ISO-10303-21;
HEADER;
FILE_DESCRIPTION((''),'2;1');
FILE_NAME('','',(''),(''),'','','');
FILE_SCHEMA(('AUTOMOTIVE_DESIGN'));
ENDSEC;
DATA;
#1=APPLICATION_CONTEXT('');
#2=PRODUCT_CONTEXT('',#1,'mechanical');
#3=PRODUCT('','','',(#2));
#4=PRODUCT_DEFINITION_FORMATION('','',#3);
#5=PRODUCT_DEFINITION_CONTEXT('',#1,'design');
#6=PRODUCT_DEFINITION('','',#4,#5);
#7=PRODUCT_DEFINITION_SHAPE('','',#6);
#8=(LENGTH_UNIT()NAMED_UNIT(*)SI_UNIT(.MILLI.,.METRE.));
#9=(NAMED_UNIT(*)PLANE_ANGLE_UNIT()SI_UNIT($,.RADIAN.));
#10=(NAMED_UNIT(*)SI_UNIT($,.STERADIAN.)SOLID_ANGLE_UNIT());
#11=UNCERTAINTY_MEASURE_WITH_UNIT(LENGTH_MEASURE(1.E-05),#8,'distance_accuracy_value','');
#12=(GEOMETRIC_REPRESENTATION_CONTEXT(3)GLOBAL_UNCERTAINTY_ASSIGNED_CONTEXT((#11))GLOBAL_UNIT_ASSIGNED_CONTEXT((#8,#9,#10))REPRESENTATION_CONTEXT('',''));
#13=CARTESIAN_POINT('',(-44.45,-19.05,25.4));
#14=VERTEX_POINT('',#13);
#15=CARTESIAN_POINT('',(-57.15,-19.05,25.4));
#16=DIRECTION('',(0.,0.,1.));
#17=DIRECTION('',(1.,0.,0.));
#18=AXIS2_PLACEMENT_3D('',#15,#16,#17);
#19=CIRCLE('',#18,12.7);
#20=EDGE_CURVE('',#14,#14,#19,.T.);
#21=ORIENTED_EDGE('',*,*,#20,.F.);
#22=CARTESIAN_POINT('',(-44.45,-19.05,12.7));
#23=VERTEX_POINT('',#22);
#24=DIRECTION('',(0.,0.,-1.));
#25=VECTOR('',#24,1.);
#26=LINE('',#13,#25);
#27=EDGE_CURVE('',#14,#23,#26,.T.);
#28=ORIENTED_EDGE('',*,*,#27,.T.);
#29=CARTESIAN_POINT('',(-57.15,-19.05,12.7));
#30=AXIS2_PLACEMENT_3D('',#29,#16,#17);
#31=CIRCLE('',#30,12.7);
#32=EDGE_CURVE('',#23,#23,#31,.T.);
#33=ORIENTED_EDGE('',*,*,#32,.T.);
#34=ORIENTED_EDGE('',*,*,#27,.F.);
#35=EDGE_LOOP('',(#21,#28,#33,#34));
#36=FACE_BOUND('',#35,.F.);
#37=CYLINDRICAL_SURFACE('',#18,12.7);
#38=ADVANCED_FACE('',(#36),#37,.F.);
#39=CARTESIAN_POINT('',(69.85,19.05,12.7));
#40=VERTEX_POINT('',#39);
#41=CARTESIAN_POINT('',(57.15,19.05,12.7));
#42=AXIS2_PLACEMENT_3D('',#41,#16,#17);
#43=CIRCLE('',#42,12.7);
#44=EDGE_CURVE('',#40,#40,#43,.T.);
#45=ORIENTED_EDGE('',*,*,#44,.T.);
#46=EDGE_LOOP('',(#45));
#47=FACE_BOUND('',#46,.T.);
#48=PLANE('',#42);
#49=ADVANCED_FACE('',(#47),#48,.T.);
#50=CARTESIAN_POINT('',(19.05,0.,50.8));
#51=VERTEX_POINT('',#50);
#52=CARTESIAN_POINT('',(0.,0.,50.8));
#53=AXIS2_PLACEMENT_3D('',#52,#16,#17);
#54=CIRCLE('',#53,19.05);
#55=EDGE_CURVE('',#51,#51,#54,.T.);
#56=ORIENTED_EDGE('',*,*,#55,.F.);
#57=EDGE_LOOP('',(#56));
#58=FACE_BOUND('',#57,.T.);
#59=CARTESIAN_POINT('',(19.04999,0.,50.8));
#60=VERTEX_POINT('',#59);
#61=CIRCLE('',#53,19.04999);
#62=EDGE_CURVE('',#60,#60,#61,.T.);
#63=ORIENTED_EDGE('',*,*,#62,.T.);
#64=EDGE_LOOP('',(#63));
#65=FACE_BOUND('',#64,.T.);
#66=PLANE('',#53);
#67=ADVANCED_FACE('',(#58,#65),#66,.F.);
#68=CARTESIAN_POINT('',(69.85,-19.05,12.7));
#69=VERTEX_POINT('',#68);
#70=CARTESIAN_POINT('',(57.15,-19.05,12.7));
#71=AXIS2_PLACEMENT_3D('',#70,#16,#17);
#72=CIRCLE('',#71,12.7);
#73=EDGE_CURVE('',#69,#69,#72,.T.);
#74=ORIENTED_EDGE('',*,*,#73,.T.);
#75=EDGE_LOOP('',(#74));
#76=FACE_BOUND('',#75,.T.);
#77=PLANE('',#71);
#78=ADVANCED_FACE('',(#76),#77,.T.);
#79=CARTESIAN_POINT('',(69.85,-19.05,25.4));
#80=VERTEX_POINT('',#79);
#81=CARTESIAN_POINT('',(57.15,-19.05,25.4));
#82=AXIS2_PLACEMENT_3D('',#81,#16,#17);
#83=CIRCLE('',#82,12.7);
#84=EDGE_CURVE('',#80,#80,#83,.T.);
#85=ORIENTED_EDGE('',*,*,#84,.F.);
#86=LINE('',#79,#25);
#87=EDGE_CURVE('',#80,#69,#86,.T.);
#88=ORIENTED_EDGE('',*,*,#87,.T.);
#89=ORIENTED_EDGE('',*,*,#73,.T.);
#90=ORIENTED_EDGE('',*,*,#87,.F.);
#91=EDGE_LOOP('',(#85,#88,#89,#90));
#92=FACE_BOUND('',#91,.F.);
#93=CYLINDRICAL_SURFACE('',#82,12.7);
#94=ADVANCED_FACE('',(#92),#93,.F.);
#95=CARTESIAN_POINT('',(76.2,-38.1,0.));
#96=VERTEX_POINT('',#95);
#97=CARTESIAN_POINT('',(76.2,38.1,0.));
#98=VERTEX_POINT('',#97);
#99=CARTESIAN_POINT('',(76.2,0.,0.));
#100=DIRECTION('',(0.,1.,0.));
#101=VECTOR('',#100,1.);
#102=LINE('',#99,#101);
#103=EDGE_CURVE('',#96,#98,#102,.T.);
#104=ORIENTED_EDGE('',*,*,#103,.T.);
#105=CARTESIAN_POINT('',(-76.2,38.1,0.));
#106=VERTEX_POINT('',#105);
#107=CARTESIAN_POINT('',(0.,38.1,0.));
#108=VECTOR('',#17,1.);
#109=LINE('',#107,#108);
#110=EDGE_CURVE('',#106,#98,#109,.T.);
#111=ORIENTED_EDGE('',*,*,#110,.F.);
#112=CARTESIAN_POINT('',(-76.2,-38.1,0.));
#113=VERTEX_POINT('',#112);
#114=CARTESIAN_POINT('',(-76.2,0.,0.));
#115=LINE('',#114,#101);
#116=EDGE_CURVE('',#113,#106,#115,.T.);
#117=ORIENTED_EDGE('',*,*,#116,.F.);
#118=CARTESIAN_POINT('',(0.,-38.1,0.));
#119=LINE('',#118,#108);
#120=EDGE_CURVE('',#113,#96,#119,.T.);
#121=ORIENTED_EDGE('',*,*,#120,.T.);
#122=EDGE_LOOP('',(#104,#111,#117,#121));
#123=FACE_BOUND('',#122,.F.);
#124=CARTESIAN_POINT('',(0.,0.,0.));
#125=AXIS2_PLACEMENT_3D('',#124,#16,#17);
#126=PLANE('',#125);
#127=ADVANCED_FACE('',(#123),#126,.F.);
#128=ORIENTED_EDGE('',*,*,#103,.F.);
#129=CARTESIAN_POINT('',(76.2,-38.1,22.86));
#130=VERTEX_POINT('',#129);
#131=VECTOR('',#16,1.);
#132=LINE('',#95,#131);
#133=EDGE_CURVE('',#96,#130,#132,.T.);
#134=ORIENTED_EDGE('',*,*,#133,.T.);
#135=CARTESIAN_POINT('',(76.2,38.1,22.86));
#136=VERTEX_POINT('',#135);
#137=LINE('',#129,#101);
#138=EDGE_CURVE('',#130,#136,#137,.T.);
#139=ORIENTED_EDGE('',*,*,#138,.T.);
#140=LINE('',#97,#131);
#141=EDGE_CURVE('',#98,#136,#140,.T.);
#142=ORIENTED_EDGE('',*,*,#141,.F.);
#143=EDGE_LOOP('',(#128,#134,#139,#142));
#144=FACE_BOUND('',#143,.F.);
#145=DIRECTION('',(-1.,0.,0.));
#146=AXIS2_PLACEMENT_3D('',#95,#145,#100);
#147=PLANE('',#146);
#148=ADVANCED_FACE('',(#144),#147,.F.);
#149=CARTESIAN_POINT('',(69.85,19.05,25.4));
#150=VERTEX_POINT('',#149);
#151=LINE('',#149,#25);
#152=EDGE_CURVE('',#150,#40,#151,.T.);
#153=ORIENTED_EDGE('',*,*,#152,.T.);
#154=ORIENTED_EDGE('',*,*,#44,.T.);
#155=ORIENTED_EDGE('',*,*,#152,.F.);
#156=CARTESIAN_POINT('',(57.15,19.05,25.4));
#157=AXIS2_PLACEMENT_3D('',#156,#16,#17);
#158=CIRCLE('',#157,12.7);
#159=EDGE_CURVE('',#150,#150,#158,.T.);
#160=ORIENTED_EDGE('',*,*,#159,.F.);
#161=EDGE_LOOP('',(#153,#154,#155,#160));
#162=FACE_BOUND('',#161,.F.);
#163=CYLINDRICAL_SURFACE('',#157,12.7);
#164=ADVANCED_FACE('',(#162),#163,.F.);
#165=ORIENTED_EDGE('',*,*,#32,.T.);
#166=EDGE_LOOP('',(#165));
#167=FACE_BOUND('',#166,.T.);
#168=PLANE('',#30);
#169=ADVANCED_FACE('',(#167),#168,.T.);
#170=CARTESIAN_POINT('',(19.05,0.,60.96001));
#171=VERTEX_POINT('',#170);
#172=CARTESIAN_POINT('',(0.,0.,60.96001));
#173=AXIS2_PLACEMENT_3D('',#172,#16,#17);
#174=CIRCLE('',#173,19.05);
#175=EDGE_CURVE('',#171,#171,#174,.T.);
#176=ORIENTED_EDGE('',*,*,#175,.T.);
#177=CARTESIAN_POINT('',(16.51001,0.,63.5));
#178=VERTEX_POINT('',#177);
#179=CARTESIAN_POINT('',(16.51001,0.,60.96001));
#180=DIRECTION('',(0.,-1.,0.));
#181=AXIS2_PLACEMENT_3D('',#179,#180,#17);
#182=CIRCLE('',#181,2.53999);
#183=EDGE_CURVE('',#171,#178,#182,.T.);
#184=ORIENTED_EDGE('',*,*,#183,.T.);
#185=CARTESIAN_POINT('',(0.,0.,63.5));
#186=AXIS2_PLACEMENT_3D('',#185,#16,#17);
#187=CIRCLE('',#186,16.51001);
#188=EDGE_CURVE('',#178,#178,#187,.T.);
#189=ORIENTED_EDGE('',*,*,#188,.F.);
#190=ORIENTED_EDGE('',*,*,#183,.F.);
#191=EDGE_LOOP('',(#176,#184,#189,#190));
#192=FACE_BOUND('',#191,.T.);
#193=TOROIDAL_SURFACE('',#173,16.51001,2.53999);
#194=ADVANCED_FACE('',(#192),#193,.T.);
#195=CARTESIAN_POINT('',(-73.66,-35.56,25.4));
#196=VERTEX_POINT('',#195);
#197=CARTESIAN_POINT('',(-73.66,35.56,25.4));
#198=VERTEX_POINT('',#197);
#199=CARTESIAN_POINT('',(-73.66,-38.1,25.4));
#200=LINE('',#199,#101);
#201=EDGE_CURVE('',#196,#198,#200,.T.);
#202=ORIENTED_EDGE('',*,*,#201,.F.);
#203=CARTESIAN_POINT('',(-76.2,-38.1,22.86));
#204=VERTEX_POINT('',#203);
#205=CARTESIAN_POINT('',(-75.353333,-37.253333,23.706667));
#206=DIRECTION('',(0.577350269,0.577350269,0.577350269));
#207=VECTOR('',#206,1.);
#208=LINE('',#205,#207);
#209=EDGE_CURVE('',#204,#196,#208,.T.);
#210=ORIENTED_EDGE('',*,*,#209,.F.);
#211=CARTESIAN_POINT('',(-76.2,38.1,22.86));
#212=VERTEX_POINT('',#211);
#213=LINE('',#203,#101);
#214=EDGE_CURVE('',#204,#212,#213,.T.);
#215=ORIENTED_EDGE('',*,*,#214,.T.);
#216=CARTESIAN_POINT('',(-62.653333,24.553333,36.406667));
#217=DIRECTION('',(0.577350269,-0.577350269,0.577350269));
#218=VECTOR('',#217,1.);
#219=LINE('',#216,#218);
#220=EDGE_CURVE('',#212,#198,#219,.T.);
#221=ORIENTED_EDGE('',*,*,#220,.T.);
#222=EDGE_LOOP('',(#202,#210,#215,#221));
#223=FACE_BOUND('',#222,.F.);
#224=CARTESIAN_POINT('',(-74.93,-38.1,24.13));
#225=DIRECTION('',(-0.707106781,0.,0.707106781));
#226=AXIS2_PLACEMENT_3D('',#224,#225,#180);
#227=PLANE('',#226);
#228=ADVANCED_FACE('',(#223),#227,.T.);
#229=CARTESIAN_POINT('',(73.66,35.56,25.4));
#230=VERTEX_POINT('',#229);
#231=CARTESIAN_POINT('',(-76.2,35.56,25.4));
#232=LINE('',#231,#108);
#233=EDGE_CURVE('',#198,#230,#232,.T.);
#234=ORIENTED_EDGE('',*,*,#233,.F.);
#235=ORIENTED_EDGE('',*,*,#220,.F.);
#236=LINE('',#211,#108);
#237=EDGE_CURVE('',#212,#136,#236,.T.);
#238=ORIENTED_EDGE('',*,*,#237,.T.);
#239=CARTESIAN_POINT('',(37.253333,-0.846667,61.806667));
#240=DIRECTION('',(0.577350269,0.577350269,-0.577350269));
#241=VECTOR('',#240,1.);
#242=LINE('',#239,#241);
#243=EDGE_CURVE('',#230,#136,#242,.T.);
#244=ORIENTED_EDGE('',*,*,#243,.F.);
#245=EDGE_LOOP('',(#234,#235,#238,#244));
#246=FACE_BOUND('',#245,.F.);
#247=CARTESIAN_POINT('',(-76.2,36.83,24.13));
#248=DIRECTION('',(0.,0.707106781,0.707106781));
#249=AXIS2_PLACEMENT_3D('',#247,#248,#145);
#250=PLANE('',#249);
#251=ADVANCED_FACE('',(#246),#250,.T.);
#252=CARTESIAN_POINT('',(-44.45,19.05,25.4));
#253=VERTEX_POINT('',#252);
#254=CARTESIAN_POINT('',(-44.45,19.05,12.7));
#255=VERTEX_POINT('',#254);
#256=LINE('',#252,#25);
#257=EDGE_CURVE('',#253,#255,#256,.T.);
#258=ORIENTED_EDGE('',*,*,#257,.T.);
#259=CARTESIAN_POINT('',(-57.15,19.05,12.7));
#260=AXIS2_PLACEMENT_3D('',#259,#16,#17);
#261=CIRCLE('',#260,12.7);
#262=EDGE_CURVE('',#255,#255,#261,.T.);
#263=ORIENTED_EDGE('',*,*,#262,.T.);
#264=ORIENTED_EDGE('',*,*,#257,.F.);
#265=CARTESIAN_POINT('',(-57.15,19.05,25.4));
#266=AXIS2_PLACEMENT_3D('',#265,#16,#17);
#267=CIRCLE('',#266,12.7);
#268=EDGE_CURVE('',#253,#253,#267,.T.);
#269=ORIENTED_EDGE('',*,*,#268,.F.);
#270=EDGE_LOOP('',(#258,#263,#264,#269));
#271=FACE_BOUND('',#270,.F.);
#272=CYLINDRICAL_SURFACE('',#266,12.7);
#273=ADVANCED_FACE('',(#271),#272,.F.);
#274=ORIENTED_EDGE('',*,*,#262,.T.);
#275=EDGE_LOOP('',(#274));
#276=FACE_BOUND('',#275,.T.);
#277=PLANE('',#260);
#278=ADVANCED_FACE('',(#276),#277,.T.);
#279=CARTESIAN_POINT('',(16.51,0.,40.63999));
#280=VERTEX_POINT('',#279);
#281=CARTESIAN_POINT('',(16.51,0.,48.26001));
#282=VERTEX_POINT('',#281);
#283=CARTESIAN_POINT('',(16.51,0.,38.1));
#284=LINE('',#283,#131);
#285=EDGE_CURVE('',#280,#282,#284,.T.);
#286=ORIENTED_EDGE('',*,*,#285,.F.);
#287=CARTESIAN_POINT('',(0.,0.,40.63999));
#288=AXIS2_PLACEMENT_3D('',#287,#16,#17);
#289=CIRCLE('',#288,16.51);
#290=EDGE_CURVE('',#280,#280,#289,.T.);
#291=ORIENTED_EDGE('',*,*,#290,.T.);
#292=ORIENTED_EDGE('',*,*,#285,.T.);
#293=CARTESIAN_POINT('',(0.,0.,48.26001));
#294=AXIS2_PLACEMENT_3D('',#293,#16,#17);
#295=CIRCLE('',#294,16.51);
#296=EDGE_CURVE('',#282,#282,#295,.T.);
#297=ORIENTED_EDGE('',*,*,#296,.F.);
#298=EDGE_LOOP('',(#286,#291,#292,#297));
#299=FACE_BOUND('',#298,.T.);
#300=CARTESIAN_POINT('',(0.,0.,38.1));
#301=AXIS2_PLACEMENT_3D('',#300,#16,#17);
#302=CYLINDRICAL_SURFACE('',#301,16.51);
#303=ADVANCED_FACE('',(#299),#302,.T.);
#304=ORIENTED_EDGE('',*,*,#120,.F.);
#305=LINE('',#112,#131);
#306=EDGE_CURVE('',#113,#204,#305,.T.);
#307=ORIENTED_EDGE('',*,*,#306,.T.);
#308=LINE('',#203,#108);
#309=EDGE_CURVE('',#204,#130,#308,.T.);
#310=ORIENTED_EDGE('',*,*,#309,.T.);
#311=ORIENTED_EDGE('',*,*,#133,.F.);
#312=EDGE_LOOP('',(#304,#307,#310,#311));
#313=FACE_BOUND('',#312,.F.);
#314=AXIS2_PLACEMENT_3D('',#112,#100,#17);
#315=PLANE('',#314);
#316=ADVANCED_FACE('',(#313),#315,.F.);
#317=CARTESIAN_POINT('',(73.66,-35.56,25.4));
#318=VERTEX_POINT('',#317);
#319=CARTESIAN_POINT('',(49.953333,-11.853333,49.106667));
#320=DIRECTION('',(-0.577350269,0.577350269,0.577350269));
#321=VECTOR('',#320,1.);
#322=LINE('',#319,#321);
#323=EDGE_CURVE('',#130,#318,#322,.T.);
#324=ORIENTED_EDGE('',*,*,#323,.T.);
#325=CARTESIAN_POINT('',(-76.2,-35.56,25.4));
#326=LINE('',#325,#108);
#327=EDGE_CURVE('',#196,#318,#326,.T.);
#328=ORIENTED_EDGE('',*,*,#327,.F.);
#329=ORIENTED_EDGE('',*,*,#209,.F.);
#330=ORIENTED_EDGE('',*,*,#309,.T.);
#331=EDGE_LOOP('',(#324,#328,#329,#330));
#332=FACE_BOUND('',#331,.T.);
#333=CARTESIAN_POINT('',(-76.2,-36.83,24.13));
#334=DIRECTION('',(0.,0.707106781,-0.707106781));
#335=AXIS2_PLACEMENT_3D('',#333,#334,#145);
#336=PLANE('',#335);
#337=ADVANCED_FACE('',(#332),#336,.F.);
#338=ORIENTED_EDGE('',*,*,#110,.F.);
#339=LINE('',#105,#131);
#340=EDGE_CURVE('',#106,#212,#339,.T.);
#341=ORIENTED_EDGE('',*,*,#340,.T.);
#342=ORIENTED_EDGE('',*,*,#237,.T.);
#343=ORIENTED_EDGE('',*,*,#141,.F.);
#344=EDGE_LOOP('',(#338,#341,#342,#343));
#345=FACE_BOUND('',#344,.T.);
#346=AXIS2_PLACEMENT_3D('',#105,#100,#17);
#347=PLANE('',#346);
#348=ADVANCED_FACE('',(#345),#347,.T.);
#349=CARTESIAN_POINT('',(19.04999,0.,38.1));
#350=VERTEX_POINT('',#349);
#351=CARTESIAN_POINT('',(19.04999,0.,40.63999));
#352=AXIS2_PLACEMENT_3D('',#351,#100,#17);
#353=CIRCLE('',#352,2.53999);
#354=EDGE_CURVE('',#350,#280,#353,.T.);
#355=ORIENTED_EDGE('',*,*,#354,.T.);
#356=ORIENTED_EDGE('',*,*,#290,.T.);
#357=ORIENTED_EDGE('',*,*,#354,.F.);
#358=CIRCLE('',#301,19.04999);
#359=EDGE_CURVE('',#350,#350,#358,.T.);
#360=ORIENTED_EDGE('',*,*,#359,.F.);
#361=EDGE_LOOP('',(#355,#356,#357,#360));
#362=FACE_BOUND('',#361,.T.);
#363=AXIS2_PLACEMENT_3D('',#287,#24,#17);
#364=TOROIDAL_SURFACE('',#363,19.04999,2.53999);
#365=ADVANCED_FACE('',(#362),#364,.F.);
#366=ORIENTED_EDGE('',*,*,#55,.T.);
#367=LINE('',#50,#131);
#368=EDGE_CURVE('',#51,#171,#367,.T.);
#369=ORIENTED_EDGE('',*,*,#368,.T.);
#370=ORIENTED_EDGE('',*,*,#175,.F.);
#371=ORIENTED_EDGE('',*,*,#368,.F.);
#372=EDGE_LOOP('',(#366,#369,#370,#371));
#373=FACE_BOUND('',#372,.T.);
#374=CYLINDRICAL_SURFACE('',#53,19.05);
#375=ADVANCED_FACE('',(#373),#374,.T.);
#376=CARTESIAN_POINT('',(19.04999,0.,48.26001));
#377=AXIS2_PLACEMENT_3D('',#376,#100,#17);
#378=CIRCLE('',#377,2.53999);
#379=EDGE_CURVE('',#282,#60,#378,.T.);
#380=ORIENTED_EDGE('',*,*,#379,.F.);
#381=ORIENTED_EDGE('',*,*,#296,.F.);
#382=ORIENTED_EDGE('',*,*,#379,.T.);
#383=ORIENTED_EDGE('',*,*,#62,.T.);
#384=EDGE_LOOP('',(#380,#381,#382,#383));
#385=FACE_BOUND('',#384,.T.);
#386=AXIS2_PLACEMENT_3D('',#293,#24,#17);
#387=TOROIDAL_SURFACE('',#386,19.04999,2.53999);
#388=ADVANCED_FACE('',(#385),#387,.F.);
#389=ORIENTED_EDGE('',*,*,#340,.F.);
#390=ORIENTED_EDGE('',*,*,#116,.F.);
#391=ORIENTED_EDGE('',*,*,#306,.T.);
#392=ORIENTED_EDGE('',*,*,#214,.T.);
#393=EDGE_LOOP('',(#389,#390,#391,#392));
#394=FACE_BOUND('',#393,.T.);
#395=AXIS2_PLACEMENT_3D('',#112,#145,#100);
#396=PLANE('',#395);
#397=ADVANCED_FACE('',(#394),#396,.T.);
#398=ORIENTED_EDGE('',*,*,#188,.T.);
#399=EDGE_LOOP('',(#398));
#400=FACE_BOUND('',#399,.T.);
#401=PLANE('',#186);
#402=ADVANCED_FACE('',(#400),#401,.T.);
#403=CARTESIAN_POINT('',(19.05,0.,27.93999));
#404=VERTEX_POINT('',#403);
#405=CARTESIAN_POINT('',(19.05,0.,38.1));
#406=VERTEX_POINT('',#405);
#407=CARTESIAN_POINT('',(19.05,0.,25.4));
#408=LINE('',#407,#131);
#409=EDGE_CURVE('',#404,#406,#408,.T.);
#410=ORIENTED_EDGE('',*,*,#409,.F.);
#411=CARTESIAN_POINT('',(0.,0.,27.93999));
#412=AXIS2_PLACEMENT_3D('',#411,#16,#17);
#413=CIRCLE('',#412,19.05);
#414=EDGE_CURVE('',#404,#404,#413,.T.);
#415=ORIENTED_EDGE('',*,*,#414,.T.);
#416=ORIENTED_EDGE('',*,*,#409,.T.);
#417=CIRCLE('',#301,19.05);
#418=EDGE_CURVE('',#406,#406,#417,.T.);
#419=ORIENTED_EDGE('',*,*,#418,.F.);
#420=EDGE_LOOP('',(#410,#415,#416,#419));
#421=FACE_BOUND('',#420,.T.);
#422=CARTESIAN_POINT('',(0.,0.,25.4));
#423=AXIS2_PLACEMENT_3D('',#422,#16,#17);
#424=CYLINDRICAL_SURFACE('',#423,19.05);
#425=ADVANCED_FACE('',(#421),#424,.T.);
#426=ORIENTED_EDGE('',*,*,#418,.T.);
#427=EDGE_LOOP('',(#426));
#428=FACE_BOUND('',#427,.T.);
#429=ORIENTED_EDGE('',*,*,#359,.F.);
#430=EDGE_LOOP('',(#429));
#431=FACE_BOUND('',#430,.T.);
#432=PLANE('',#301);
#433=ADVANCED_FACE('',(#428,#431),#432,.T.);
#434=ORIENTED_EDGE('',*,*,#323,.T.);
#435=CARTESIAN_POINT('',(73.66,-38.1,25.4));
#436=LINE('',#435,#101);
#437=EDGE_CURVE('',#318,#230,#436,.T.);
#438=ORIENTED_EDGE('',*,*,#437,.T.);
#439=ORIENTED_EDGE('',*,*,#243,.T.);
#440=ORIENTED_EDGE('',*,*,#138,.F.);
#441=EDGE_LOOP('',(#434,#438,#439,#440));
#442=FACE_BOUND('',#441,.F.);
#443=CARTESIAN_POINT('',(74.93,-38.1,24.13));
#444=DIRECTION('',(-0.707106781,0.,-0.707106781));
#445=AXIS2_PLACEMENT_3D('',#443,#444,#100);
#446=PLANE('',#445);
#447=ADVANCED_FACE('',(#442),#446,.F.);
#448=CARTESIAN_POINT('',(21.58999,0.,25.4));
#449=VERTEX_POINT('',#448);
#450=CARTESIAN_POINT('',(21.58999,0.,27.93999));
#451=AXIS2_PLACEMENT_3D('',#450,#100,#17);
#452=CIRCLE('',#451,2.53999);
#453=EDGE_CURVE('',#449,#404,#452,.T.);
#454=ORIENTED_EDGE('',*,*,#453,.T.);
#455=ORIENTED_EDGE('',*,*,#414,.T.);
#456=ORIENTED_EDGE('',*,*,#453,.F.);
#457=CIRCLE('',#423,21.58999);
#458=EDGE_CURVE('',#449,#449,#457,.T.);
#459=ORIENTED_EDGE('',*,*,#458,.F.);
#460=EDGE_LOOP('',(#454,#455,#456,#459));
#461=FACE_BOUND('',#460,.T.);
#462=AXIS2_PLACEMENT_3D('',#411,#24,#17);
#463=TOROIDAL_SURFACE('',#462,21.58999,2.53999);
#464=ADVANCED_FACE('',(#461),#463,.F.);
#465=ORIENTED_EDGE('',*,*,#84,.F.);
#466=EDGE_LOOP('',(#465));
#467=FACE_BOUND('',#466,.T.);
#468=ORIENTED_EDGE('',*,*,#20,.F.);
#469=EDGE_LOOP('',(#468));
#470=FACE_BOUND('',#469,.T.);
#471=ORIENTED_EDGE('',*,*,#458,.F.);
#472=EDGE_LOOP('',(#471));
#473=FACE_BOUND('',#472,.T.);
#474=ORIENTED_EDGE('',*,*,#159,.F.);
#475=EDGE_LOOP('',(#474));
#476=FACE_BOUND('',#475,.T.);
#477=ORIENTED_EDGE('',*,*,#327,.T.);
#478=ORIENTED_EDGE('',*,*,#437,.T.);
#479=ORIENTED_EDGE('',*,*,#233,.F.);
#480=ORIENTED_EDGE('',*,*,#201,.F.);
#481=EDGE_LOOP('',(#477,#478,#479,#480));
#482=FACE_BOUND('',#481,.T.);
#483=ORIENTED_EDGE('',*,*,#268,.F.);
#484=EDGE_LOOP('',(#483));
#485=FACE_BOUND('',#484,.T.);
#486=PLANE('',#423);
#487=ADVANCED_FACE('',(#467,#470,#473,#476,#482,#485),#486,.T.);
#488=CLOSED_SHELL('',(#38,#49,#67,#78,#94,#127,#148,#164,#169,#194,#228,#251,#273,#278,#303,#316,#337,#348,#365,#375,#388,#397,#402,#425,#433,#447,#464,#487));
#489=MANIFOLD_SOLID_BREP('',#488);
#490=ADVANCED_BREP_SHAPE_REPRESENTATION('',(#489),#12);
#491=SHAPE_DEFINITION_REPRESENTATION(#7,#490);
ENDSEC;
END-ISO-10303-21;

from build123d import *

# Parameters (mm, degrees)
F0_W     = 152.4
F0_H     = 76.2
F1_DEPTH = 25.4
F2_R     = 12.7
F3_DEPTH = 12.7
F4_SIZE  = 2.54
F7_R     = 2.53999


# Not quite as in the source:
# - a fillet or chamfer is up to 0.001 mm smaller than in the source, because OpenCascade refuses the exact size


with BuildPart() as f1:
    # F0 (on Top) → F1 (new body)
    with BuildSketch(Plane.XY):
        Rectangle(F0_W, F0_H)
    extrude(amount=F1_DEPTH)

    # F2 (on face) → F3 (cut)
    with BuildSketch(Plane.XY.offset(25.4)):
        with Locations((57.15, -19.05)):
            Circle(F2_R)
        with Locations((-57.15, -19.05)):
            Circle(F2_R)
        with Locations((-57.15, 19.05)):
            Circle(F2_R)
        with Locations((57.15, 19.05)):
            Circle(F2_R)
    extrude(amount=-F3_DEPTH, mode=Mode.SUBTRACT)

    # F4
    f4_edges = [f1.edges().sort_by_distance(p)[0] for p in [
        (0, -38.1, 25.4),
        (76.2, 0, 25.4),
        (0, 38.1, 25.4),
        (-76.2, 0, 25.4),
    ]]
    chamfer(f4_edges, length=F4_SIZE)

    # F5 (on Front) → F6 (revolve)
    with BuildSketch(Plane.XZ):
        Polygon((0, 63.5), (0, 25.4), (19.05, 25.4), (19.05, 38.1), (16.51, 38.1), (16.51, 50.8), (19.05, 50.8), (19.05, 63.5), align=None)
    revolve(axis=Axis((0, 0, 44.45), (0, 0, 1)))

    # F7 (radius 2.54 in the source; OpenCascade refuses exactly that, so slightly less here)
    f7_edges = [f1.edges().sort_by_distance(p)[0] for p in [
        (-16.51, 0, 38.1),
        (-19.05, 0, 25.4),
        (-16.51, 0, 50.8),
        (-19.05, 0, 63.5),
    ]]
    fillet(f7_edges, radius=F7_R)


solid = f1.part
